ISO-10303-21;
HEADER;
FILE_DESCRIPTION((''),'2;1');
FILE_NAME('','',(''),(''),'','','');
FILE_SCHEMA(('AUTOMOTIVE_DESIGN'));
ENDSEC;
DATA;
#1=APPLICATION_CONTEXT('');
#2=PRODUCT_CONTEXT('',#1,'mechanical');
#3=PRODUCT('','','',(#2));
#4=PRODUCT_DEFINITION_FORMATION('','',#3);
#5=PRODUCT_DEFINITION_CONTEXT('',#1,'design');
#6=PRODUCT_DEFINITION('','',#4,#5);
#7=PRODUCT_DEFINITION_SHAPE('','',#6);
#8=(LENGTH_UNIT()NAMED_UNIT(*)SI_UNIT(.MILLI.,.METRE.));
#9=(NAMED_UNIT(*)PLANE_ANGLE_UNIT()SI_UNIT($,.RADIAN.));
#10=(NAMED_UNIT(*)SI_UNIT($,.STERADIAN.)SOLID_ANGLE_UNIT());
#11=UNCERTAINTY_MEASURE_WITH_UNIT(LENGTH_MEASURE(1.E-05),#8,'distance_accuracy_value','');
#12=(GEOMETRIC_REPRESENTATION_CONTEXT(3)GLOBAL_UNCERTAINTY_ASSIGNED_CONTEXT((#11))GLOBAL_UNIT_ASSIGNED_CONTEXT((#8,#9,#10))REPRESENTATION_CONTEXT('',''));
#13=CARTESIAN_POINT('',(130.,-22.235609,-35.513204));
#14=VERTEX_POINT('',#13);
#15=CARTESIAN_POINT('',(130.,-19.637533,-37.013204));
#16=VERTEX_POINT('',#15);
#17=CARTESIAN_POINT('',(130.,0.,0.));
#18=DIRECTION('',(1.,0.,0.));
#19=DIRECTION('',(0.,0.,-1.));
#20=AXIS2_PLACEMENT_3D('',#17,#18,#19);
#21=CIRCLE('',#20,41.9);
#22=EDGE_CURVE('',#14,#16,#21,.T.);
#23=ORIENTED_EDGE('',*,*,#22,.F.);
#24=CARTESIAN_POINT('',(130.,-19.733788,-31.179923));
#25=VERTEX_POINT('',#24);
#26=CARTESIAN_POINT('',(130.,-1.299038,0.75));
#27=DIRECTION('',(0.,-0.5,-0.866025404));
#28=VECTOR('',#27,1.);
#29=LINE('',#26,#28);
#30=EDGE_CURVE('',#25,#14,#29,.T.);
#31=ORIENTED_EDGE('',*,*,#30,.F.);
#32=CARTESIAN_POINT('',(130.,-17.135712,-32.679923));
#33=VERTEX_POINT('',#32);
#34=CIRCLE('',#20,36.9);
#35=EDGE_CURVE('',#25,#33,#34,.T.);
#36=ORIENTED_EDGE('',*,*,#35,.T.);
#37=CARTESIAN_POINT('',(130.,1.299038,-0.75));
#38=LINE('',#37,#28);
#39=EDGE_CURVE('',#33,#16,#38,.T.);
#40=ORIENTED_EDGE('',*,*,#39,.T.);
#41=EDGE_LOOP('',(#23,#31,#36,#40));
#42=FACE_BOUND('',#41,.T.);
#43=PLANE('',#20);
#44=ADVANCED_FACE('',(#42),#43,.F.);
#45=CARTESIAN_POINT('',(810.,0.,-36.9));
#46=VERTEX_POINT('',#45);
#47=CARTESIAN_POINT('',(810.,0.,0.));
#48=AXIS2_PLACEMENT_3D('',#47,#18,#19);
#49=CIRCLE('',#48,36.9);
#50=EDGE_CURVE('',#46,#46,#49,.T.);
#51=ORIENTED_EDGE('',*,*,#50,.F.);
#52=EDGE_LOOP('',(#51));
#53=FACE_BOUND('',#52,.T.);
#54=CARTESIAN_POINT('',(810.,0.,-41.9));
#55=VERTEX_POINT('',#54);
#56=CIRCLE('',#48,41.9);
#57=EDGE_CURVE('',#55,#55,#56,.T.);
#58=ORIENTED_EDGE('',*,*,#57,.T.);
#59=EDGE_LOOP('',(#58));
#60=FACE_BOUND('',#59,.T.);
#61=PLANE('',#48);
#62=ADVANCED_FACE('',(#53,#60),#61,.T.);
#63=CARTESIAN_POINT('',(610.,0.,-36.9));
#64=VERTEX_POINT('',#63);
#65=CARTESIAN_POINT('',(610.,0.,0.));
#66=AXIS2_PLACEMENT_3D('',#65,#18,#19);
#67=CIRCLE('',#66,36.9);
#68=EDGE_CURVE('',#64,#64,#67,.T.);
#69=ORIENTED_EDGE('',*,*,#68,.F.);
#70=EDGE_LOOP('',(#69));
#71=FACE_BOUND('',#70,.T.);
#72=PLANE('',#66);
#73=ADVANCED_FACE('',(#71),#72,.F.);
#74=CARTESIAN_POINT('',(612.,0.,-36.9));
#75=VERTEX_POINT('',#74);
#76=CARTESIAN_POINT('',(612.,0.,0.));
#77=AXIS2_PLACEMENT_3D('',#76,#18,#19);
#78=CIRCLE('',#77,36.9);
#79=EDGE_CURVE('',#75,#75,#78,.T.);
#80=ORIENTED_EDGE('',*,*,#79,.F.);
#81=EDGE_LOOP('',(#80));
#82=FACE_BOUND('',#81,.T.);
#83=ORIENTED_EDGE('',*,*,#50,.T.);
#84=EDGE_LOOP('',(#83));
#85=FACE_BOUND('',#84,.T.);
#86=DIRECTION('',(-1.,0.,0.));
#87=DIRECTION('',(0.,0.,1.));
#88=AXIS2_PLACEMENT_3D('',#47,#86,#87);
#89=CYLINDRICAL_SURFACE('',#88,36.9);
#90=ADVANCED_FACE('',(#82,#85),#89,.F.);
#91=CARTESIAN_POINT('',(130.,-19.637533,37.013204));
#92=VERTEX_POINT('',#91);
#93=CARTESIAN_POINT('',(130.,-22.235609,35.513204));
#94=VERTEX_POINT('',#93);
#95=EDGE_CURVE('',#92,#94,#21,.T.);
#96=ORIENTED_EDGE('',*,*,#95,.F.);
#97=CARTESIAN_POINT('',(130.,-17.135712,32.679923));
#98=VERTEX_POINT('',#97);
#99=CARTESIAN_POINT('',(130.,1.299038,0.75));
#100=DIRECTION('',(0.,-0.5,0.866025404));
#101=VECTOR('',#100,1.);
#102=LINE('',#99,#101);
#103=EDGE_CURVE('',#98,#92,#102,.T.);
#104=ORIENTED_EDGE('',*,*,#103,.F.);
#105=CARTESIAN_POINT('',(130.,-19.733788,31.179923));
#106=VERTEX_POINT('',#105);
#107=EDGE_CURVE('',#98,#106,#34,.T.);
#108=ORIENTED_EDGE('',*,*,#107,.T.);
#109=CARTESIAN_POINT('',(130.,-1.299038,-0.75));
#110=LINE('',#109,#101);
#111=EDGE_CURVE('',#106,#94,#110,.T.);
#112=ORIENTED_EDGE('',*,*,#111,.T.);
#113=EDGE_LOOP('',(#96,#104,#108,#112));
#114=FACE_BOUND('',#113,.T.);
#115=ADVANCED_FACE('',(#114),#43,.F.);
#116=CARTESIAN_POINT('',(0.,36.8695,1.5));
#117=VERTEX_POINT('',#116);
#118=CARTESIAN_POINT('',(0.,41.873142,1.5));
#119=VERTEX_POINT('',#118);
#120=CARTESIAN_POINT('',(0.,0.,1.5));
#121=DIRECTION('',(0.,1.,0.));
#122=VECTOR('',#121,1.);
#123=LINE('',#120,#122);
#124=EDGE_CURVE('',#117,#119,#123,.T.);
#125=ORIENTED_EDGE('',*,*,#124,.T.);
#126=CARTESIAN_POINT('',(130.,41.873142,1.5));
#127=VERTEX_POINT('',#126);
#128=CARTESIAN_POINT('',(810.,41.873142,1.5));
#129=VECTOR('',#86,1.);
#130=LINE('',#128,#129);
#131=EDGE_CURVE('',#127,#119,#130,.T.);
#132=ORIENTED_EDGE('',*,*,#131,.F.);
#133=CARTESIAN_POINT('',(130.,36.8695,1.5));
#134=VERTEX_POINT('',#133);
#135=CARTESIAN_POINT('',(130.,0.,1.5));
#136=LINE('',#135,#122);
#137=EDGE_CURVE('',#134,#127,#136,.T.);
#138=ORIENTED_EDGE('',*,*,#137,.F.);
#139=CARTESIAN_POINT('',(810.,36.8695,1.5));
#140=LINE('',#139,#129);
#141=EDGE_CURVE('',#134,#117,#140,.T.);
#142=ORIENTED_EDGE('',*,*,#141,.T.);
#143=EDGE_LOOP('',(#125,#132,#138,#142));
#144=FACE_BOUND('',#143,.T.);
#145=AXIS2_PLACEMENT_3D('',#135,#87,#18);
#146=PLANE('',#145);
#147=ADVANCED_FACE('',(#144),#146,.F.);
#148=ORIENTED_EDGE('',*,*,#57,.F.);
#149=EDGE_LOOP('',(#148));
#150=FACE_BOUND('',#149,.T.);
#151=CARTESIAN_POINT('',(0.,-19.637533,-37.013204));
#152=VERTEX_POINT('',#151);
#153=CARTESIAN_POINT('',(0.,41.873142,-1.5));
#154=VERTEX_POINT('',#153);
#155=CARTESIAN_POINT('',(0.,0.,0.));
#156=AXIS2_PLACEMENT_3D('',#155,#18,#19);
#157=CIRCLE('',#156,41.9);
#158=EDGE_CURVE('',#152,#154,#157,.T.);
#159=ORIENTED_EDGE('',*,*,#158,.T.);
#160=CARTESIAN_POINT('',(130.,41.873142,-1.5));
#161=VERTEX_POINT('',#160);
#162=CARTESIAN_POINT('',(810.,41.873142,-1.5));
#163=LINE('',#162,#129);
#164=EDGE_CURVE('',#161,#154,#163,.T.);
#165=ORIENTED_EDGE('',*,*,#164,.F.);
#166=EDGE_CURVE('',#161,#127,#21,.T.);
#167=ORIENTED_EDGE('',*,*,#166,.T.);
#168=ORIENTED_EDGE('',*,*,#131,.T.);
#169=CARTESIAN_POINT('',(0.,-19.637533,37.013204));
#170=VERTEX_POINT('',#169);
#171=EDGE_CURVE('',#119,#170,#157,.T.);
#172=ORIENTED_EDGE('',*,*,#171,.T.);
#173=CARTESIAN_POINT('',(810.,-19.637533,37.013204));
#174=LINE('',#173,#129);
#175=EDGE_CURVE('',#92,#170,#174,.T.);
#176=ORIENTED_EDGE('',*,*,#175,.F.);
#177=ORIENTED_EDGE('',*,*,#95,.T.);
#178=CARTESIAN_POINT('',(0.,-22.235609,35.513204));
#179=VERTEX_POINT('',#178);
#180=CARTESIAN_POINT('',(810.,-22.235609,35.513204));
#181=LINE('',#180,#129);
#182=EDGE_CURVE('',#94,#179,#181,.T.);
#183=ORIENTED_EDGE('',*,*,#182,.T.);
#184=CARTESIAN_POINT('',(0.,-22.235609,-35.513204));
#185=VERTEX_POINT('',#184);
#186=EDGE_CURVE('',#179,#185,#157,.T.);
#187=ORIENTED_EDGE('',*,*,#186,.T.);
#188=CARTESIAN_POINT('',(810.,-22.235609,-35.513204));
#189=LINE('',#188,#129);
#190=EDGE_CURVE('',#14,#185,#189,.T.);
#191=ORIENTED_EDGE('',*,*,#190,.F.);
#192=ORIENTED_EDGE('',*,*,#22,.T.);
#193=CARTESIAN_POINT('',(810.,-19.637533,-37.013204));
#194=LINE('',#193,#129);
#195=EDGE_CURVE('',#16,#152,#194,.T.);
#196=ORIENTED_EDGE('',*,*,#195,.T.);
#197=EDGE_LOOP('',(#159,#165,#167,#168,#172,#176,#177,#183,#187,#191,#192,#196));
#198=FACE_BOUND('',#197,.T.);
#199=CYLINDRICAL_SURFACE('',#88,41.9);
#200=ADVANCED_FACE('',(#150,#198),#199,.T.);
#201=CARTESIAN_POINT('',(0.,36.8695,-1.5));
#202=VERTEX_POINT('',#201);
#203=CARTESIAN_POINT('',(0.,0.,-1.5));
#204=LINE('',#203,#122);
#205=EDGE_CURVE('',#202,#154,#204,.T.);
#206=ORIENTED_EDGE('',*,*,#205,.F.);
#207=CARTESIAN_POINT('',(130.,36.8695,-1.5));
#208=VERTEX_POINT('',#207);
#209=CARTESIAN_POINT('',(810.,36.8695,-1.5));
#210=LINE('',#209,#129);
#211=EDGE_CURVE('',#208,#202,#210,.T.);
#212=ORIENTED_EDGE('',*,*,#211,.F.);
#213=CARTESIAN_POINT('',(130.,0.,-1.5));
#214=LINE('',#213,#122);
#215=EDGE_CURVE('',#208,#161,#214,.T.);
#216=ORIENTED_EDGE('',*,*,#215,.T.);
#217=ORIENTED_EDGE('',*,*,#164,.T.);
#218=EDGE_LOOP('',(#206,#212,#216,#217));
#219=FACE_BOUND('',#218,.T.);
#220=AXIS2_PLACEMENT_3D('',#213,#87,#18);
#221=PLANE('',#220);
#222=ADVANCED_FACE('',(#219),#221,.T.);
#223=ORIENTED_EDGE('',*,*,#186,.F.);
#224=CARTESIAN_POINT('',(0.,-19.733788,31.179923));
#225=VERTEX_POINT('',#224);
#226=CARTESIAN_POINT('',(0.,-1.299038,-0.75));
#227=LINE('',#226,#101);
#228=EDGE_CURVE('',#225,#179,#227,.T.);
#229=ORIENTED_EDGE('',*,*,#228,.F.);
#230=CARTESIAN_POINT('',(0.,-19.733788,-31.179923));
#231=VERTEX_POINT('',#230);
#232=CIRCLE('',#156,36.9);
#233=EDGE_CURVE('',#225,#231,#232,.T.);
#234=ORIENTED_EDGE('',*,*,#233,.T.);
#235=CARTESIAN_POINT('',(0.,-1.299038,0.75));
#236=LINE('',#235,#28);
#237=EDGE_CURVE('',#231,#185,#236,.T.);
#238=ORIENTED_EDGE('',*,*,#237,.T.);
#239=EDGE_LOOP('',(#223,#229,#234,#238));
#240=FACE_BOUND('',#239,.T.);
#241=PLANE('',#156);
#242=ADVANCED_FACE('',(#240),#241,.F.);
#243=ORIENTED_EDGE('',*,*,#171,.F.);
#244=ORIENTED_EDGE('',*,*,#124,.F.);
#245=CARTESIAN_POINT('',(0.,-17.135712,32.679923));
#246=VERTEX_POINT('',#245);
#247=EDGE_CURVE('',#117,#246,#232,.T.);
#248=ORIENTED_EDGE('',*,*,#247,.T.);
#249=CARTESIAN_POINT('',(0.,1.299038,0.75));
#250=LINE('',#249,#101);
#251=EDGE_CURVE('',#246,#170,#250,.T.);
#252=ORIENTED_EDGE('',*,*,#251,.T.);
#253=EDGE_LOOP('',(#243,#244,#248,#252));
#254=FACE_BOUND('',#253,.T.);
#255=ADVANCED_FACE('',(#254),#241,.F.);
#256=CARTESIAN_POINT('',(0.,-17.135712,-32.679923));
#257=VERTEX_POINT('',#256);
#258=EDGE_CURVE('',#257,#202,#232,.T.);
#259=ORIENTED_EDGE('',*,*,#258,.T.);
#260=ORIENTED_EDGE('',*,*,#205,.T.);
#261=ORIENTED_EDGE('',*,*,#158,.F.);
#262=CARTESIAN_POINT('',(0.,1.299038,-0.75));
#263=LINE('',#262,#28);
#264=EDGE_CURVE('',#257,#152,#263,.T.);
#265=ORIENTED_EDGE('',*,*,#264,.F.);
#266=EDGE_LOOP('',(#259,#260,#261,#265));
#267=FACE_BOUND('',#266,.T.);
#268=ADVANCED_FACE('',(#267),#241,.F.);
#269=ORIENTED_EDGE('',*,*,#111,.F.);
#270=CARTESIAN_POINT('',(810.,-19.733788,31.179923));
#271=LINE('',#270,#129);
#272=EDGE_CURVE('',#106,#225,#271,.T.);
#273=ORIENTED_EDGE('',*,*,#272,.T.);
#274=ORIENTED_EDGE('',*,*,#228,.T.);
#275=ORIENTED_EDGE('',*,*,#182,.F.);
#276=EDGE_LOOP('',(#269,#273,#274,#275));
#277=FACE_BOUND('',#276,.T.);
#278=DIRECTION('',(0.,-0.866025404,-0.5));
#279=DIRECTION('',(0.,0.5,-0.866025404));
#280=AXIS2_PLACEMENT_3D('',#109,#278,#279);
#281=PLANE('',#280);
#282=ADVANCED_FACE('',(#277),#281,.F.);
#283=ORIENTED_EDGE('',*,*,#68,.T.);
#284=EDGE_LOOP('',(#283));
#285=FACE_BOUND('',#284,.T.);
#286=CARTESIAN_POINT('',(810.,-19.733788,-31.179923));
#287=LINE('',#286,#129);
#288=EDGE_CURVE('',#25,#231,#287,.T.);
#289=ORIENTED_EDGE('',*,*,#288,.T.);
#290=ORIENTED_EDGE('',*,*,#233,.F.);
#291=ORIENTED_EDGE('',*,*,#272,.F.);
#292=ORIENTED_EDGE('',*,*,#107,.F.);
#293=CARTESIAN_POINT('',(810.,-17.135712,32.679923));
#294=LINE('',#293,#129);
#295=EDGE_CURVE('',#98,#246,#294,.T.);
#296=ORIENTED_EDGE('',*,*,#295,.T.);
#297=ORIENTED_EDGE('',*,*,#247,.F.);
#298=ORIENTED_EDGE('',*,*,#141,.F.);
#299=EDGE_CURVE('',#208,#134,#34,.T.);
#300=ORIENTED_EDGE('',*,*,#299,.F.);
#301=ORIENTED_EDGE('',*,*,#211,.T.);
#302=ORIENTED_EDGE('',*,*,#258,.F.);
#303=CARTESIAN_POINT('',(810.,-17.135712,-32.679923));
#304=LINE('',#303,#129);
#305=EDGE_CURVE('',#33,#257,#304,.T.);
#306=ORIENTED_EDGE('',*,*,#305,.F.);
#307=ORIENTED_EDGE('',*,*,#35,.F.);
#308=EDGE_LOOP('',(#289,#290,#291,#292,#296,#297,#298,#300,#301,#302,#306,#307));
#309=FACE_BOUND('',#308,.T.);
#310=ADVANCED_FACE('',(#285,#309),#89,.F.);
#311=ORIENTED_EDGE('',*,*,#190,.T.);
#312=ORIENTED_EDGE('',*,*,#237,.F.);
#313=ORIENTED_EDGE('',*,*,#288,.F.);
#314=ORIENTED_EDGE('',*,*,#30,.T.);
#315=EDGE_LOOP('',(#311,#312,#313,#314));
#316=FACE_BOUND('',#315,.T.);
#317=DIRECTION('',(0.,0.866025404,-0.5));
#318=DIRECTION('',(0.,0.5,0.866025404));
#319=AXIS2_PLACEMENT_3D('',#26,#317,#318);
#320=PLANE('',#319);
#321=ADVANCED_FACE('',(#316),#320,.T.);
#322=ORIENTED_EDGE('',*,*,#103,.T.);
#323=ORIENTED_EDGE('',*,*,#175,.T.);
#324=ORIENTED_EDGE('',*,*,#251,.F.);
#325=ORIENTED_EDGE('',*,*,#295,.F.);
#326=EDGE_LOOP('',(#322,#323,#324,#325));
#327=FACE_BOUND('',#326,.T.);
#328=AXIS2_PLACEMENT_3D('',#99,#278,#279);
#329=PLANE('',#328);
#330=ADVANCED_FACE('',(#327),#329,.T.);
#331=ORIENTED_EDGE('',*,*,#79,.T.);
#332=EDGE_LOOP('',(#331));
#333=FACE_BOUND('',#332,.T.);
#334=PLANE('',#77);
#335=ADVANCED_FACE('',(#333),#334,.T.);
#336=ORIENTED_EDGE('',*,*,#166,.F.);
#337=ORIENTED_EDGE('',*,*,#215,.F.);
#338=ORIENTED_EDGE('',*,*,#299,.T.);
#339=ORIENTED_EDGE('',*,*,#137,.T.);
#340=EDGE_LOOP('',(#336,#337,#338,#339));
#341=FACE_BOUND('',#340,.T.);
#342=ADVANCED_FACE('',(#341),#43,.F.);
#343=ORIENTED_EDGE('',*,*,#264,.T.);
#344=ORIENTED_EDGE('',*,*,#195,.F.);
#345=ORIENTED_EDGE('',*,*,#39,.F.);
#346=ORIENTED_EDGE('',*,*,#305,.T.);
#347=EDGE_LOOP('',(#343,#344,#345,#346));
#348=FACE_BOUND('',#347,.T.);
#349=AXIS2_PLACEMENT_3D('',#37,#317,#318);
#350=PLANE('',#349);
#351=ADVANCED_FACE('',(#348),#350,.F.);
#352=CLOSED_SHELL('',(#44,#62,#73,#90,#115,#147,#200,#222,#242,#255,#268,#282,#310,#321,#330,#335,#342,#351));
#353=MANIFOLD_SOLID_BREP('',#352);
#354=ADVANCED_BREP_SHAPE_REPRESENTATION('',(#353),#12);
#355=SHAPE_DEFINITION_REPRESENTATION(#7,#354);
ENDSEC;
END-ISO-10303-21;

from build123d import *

# Parameters (mm, degrees)
SKETCH1_R               = 41.9
SKETCH1_R_2             = 36.9
BOSS_EXTRUDE1_DEPTH     = 810
CUT_EXTRUDE_THIN1_START = -130
CUT_EXTRUDE_THIN1_DEPTH = 130
SKETCH3_R               = 36.9
BOSS_EXTRUDE2_DEPTH     = 2


# Read off the part's stored shape, not the designer's step: Cut-Extrude-Thin1
with BuildPart() as part:
    # Sketch1 → Boss-Extrude1 (new body)
    with BuildSketch(Plane(origin=(0, 0, 0), x_dir=(0, 0, -1), z_dir=(1, 0, 0))):
        Circle(SKETCH1_R)
        Circle(SKETCH1_R_2, mode=Mode.SUBTRACT)
    extrude(amount=BOSS_EXTRUDE1_DEPTH)

    # Cut-Extrude-Thin1 outline → Cut-Extrude-Thin1 (cut)
    with BuildSketch(Plane.ZY.offset(CUT_EXTRUDE_THIN1_START)):
        with BuildLine():
            ThreePointArc((-31.179923269, -19.733787901), (-31.9563374, -18.45), (-32.67992327, -17.135711689))
            Line((-32.67992327, -17.135711689), (-37.013204492, -19.637532769))
            ThreePointArc((-37.013204492, -19.637532769), (-36.286464419, -20.95), (-35.513204492, -22.235608981))
            Line((-35.513204492, -22.235608981), (-31.179923269, -19.733787901))
        make_face()
        with BuildLine():
            Line((-1.5, 41.87314175), (-1.5, 36.86949959))
            ThreePointArc((-1.5, 36.86949959), (0, 36.9), (1.5, 36.86949959))
            Line((1.5, 36.86949959), (1.5, 41.87314175))
            ThreePointArc((1.5, 41.87314175), (0, 41.9), (-1.5, 41.87314175))
        make_face()
        with BuildLine():
            ThreePointArc((32.67992327, -17.135711689), (31.9563374, -18.45), (31.179923269, -19.733787901))
            Line((31.179923269, -19.733787901), (35.513204492, -22.235608981))
            ThreePointArc((35.513204492, -22.235608981), (36.286464419, -20.95), (37.013204492, -19.637532769))
            Line((37.013204492, -19.637532769), (32.67992327, -17.135711689))
        make_face()
    extrude(amount=CUT_EXTRUDE_THIN1_DEPTH, mode=Mode.SUBTRACT)

    # Sketch3 → Boss-Extrude2 (add)
    with BuildSketch(Plane(origin=(610, 0, 0), x_dir=(0, 0, -1), z_dir=(1, 0, 0))):
        with Locations(Location((0, 0, 0), (0, 0, 207.67026134))):
            Circle(SKETCH3_R)
    extrude(amount=BOSS_EXTRUDE2_DEPTH)


solid = part.part
